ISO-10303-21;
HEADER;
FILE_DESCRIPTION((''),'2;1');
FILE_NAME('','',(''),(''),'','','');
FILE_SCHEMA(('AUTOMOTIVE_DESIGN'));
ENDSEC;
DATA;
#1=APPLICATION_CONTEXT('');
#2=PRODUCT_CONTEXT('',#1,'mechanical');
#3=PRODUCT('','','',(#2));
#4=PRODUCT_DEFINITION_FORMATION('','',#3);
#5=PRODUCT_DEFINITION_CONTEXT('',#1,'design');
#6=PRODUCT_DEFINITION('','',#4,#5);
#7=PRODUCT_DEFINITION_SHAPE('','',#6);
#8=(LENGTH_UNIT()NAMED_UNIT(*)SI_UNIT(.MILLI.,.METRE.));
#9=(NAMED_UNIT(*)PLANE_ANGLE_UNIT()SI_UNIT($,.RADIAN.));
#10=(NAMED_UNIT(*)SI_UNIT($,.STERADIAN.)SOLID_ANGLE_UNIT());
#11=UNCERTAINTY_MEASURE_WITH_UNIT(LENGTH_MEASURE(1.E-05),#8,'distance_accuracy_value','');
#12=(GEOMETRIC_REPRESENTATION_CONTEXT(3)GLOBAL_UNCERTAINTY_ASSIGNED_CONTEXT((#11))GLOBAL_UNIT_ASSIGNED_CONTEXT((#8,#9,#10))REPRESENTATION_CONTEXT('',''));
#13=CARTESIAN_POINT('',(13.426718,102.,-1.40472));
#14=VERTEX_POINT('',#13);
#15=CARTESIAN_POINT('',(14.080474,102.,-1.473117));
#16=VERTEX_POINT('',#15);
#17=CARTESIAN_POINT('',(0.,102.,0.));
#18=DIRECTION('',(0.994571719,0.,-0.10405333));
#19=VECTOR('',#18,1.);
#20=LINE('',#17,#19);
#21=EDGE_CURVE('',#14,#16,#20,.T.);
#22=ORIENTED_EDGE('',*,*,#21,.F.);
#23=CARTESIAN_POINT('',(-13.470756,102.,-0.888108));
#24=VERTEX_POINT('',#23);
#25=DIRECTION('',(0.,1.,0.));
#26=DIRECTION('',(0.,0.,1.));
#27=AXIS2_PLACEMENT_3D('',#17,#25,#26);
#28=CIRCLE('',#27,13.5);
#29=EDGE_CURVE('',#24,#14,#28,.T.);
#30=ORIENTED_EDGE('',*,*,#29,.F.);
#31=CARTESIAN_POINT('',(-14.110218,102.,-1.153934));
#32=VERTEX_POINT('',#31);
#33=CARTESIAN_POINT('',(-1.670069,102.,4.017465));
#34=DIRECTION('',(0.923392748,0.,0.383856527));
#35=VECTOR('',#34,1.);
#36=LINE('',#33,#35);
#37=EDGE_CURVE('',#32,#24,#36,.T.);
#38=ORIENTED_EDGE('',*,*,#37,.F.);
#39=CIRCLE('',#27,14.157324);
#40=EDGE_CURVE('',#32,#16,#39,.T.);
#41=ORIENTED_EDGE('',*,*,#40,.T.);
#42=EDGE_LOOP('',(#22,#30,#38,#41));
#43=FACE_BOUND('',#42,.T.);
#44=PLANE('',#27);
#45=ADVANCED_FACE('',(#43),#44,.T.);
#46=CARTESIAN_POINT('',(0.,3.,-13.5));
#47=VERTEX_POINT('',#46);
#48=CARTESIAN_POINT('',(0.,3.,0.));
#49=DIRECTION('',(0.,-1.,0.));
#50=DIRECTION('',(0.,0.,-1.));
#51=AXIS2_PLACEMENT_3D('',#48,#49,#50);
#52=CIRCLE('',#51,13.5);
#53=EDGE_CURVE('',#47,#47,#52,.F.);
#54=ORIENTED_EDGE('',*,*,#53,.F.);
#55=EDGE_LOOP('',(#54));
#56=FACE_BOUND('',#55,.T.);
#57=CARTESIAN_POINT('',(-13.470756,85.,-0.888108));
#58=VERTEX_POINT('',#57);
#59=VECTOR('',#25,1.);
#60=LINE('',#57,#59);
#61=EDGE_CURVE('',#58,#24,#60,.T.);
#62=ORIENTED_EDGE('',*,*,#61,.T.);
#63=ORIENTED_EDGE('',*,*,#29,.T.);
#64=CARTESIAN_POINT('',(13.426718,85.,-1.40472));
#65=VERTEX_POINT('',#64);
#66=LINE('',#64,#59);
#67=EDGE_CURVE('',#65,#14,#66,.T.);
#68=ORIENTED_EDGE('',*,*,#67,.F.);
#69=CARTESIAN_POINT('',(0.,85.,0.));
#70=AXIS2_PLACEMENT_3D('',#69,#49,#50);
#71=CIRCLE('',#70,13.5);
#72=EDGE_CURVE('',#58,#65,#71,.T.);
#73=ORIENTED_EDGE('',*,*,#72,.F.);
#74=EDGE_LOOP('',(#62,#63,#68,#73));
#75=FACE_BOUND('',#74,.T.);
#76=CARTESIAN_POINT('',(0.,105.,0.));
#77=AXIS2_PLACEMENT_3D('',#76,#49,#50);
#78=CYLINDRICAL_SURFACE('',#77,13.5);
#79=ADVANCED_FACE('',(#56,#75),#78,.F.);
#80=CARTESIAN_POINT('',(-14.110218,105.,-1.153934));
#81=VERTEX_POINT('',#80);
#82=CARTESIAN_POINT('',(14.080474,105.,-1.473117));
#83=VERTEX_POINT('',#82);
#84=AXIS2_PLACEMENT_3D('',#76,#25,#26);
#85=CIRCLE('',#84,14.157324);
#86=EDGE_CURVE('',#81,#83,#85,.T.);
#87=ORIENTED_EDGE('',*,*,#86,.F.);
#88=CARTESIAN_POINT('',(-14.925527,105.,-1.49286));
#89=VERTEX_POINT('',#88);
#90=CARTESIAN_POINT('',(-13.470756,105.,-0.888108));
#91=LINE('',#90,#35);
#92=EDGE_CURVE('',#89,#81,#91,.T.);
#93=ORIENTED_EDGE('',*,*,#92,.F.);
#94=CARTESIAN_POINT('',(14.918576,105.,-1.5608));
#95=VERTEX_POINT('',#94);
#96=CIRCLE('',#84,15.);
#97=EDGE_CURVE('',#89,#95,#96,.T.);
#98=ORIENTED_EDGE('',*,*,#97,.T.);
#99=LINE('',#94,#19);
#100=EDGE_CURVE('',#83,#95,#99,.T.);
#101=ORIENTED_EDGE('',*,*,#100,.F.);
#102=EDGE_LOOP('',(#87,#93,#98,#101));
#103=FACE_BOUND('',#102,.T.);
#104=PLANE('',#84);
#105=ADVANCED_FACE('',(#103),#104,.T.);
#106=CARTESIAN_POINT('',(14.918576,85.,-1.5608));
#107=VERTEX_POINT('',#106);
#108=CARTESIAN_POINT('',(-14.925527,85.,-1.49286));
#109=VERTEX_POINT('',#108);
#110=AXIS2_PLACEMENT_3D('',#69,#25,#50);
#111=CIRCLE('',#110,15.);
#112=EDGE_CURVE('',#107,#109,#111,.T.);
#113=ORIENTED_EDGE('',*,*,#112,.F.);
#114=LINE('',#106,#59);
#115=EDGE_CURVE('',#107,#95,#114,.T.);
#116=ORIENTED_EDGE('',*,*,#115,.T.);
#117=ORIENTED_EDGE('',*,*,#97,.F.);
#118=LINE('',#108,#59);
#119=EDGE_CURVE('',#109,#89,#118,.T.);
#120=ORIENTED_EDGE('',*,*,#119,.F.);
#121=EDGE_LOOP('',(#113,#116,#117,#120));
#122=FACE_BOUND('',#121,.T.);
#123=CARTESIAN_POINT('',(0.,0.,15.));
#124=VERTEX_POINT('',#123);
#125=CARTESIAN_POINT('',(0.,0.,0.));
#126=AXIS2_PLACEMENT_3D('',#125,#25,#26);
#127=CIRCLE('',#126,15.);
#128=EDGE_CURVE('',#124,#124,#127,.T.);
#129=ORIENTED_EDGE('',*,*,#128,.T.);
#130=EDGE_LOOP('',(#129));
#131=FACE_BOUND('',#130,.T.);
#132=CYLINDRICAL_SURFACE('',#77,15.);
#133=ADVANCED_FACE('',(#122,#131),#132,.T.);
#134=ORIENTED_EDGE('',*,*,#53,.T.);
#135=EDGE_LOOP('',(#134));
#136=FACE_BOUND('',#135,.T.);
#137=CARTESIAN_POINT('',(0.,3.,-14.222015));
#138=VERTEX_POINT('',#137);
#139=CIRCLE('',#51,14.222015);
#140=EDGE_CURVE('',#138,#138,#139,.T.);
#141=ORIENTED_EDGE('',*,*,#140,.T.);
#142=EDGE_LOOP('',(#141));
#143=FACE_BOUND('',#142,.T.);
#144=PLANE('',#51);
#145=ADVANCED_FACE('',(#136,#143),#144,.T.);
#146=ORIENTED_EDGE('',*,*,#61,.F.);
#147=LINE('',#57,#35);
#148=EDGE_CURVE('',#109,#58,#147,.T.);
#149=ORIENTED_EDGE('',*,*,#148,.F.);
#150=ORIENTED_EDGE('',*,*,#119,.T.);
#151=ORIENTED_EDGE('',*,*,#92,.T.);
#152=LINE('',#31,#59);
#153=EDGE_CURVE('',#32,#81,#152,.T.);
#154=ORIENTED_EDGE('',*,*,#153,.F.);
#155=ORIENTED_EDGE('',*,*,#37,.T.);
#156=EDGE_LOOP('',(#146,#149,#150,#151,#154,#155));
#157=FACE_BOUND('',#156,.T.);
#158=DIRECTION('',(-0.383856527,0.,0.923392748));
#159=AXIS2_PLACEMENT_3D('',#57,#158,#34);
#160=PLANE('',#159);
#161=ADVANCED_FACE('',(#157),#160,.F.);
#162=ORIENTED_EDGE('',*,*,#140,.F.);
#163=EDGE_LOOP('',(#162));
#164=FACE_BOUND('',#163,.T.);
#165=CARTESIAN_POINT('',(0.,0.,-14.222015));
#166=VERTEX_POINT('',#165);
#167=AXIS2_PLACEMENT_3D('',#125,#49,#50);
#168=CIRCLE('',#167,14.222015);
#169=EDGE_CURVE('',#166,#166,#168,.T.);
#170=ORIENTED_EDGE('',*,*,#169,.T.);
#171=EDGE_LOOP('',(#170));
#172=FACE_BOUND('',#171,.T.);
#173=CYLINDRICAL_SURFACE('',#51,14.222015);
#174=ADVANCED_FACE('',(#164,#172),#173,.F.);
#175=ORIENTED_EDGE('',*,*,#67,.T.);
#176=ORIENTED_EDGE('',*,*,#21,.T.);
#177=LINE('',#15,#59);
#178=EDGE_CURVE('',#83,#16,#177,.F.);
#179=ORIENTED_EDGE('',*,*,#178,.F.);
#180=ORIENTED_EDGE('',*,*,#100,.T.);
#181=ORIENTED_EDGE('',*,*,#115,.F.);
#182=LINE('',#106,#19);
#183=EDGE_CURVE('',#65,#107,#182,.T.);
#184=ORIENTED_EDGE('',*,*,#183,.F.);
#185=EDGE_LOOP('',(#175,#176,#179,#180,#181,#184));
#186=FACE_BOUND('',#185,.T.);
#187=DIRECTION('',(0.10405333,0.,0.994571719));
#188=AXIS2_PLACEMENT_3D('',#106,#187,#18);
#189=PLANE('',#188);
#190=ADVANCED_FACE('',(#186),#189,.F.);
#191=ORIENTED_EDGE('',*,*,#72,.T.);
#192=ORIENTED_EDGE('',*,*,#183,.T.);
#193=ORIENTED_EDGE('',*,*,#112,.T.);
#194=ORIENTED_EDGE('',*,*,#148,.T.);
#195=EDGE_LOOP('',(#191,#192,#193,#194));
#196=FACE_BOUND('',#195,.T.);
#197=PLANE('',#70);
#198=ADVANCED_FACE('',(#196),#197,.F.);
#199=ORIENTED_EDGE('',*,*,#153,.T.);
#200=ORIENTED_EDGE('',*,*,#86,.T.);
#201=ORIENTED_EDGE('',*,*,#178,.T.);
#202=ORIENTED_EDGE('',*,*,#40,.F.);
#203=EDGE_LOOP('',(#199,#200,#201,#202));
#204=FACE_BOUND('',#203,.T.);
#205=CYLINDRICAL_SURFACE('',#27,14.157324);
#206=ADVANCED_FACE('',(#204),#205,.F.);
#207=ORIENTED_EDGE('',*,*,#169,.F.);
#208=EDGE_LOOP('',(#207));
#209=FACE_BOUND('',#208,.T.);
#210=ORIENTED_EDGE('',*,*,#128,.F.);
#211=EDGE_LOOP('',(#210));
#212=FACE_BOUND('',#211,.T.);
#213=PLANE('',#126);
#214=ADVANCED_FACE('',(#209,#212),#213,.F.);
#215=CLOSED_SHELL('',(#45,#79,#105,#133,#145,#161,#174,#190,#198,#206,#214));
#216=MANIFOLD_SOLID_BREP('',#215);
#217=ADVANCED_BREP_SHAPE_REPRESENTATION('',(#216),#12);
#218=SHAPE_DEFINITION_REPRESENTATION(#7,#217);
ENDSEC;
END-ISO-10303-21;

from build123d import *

# Parameters (mm, degrees)
SKETCH1_R           = 15
BOSS_EXTRUDE1_DEPTH = 105
SKETCH6_R           = 14.222015383
CUT_EXTRUDE4_DEPTH  = 3
SHELL1_START        = 3
SHELL1_OUTLINE_R    = 13.5
SHELL1_DEPTH        = 102
SKETCH8_R           = 14.157324042
CUT_EXTRUDE6_DEPTH  = 3
CUT_EXTRUDE7_START  = -20
CUT_EXTRUDE7_DEPTH  = 20


# Read off the part's stored shape, not the designer's step: Shell1
with BuildPart() as part:
    # Sketch1 → Boss-Extrude1 (new body)
    with BuildSketch(Plane(origin=(0, 0, 0), x_dir=(1, 0, 0), z_dir=(0, 1, 0))):
        with Locations(Location((0, 0, 0), (0, 0, 270))):
            Circle(SKETCH1_R)
    extrude(amount=BOSS_EXTRUDE1_DEPTH)

    # Sketch6 → Cut-Extrude4 (cut)
    with BuildSketch(Plane.XZ):
        with Locations(Location((0, 0, 0), (0, 0, 270))):
            Circle(SKETCH6_R)
    extrude(amount=-CUT_EXTRUDE4_DEPTH, mode=Mode.SUBTRACT)

    # Shell1 outline → Shell1 (cut)
    with BuildSketch(Plane(origin=(0, 0, 0), x_dir=(1, 0, 0), z_dir=(0, 1, 0)).offset(SHELL1_START)):
        Circle(SHELL1_OUTLINE_R)
    extrude(amount=SHELL1_DEPTH, mode=Mode.SUBTRACT)

    # Sketch8 → Cut-Extrude6 (cut)
    with BuildSketch(Plane(origin=(0, 105, 0), x_dir=(1, 0, 0), z_dir=(0, 1, 0))):
        with Locations(Location((0, 0, 0), (0, 0, 270))):
            Circle(SKETCH8_R)
    extrude(amount=-CUT_EXTRUDE6_DEPTH, mode=Mode.SUBTRACT)

    # Sketch9 → Cut-Extrude7 (cut)
    with BuildSketch(Plane(origin=(0, 105, 0), x_dir=(1, 0, 0), z_dir=(0, 1, 0)).offset(CUT_EXTRUDE7_START)):
        with BuildLine():
            Line((14.918575787, 1.560799953), (13.426718208, 1.404719958))
            Line((13.426718208, 1.404719958), (-13.47075587, 0.888108258))
            Line((-13.47075587, 0.888108258), (-14.925527409, 1.492860192))
            ThreePointArc((-14.925527409, 1.492860192), (-0.03414724, 14.999961132), (14.918575787, 1.560799953))
        make_face()
    extrude(amount=CUT_EXTRUDE7_DEPTH, mode=Mode.SUBTRACT)


solid = part.part
